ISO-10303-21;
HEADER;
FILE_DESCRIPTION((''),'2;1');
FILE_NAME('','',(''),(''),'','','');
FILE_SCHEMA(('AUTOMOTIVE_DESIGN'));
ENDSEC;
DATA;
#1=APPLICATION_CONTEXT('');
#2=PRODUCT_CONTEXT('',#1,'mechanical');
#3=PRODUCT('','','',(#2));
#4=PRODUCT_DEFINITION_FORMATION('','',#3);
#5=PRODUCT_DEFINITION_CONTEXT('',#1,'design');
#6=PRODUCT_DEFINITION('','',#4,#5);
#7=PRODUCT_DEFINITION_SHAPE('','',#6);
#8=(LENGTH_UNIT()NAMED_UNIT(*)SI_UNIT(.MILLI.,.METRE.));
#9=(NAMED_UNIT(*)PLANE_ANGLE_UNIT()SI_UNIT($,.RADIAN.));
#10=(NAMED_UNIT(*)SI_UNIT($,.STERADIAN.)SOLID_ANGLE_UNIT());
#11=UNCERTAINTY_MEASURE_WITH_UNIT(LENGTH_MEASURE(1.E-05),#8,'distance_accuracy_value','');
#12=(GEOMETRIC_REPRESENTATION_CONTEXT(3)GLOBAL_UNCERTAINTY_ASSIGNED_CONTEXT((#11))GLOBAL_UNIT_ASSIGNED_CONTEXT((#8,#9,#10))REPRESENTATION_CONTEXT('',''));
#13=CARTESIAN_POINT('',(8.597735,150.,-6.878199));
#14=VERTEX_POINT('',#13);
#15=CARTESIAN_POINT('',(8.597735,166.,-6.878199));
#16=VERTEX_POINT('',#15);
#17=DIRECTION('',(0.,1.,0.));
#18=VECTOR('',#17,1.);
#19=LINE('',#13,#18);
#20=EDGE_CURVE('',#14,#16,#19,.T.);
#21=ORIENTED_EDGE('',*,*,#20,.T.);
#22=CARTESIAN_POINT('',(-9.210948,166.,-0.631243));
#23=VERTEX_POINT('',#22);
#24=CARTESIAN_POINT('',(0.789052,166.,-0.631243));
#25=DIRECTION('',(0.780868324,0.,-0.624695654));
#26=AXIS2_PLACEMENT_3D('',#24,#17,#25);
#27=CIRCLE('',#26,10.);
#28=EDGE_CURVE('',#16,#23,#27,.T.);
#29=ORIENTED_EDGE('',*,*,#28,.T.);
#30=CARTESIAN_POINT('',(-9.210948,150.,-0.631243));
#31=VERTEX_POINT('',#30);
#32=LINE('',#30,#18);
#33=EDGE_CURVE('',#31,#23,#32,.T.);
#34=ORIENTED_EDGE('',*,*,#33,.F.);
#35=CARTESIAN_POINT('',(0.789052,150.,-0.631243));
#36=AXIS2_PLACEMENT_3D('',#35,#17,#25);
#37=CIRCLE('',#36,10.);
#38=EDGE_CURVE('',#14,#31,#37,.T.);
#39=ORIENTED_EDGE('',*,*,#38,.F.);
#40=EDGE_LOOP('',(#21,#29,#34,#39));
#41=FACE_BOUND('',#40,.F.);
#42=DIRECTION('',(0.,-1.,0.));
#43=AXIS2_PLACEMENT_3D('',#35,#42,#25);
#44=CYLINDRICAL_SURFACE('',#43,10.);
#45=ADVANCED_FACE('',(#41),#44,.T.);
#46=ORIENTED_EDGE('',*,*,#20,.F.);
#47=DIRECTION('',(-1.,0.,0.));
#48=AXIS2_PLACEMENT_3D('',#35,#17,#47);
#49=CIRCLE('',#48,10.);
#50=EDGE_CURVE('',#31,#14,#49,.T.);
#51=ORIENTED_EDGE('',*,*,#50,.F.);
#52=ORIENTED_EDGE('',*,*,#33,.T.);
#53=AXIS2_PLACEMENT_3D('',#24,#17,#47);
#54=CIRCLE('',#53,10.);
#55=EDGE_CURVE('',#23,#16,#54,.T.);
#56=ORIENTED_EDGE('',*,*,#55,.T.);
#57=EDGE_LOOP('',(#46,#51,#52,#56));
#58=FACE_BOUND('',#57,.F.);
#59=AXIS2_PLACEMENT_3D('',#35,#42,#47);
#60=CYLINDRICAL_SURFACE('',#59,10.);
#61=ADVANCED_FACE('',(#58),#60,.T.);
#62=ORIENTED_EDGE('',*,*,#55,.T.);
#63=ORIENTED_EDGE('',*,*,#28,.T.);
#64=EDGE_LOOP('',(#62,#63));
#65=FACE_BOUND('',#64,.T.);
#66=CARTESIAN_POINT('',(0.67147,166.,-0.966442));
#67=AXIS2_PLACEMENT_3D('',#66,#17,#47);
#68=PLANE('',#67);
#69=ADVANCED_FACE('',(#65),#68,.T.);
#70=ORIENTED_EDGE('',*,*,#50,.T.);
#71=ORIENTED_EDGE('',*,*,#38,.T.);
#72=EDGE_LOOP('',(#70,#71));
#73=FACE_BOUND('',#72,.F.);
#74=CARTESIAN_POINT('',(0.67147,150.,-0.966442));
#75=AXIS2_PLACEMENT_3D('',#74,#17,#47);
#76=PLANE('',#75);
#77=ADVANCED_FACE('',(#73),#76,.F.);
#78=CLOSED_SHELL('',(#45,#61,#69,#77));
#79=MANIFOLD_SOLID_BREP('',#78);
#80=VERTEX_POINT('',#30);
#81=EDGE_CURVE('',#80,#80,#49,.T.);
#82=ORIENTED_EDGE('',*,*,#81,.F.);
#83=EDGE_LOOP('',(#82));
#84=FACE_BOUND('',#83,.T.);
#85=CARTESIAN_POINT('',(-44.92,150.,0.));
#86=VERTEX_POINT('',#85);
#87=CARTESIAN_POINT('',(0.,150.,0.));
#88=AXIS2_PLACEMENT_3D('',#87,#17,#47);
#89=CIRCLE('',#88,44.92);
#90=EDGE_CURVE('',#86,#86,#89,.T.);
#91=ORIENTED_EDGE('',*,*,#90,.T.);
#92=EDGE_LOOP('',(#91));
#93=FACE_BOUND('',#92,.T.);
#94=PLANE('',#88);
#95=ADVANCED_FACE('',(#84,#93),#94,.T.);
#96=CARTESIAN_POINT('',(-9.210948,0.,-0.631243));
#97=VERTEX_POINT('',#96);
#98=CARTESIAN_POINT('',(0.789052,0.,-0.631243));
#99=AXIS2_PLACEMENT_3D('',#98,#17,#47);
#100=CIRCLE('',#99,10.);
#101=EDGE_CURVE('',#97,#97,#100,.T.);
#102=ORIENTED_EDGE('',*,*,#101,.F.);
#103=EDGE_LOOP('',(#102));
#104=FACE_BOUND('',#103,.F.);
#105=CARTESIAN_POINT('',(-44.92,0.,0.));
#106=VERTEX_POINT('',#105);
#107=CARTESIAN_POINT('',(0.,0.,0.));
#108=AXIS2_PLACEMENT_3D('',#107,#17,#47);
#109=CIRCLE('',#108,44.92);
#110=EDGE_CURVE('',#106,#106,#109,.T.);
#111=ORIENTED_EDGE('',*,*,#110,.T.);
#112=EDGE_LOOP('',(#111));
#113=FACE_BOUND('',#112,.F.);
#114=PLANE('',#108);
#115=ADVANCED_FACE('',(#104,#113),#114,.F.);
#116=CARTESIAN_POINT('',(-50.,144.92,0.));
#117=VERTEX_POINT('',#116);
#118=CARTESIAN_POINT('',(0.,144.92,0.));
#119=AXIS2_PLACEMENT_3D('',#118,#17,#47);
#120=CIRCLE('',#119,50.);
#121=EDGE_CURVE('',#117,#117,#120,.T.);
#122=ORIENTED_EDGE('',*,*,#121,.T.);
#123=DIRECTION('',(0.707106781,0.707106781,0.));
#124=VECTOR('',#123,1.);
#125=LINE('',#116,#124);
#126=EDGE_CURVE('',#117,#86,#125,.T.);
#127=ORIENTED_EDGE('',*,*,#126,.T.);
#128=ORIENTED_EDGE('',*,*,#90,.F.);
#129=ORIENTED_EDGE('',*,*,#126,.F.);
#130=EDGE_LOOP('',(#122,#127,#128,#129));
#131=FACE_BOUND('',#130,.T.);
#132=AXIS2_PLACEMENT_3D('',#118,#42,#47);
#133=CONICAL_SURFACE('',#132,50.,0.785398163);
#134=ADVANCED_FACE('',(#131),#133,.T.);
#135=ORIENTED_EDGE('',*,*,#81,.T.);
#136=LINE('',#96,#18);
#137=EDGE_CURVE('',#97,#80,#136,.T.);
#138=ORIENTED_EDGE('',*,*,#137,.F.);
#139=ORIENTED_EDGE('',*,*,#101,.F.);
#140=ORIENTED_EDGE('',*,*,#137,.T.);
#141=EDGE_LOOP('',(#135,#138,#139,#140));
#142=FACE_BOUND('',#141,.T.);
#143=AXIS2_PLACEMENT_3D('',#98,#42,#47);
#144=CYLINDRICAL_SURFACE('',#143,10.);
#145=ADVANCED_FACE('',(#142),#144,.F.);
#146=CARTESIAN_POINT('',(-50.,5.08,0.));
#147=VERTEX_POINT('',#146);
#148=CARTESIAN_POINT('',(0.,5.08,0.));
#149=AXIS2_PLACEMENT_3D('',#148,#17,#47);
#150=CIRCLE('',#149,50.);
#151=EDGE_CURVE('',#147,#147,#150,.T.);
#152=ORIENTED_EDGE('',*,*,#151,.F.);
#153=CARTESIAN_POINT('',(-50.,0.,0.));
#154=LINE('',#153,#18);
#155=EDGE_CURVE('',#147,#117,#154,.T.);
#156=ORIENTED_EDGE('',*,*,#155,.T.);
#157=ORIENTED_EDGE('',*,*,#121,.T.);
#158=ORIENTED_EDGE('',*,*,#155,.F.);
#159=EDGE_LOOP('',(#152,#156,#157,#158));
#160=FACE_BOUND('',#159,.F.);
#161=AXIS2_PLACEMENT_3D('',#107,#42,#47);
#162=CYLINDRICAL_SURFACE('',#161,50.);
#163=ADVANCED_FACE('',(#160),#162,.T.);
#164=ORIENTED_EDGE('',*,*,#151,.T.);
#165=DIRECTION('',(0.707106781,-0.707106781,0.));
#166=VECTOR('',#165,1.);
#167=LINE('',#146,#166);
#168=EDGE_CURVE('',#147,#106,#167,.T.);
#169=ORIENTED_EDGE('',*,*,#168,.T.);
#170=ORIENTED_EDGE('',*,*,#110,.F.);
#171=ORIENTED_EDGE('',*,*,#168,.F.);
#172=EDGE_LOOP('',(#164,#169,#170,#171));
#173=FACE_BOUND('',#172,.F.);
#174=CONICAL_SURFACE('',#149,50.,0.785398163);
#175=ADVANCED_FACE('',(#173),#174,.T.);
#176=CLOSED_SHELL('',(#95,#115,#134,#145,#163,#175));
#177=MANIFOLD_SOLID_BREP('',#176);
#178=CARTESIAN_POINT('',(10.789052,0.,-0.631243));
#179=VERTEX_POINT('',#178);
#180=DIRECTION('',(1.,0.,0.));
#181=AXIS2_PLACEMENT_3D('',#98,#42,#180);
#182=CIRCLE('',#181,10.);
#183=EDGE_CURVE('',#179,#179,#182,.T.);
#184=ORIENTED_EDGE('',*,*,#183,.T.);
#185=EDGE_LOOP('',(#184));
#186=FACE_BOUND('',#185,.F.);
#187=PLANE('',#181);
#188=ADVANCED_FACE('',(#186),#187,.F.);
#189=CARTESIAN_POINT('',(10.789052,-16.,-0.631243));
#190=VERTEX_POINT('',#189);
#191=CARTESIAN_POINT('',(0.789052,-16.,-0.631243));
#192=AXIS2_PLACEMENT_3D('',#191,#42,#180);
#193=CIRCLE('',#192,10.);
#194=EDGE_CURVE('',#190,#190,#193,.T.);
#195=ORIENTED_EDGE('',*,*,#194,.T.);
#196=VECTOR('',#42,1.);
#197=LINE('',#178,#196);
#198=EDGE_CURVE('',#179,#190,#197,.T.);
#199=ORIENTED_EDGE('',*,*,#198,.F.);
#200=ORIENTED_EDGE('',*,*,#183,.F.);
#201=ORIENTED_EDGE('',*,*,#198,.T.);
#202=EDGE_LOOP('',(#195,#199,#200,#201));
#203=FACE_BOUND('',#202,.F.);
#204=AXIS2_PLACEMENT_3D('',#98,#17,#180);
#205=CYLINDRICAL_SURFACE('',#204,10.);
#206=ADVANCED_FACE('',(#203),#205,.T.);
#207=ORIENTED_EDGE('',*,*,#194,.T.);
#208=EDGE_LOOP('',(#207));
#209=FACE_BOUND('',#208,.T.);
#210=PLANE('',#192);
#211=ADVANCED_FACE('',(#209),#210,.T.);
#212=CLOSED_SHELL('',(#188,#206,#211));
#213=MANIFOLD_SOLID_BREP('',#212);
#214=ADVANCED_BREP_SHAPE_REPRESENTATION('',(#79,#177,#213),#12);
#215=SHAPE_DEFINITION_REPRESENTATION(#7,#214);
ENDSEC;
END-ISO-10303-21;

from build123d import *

# Parameters (mm, degrees)
F0_R     = 10
F1_DEPTH = 16
F2_R     = 50
F2_R_2   = 10
F3_DEPTH = 150
F6_DEPTH = 16
F7_SIZE  = 5.08


with BuildPart() as f1:
    # F0 (on Front) → F1 (new body)
    with BuildSketch(Plane.XZ):
        with Locations((0.7890519919, -0.6312426412)):
            Circle(F0_R)
    extrude(amount=F1_DEPTH)


with BuildPart() as f3:
    # F2 (on face) → F3 (new body)
    with BuildSketch(Plane(origin=(0, 0, 0), x_dir=(-1, 0, 0), z_dir=(0, 1, 0))):
        Circle(F2_R)
        with Locations((-0.7890519919, -0.6312426412)):
            Circle(F2_R_2, mode=Mode.SUBTRACT)
    extrude(amount=F3_DEPTH)

    # F7
    f7_edges = [f3.edges().sort_by_distance(p)[0] for p in [
        (50, 150, 0),
        (50, 0, 0),
    ]]
    chamfer(f7_edges, length=F7_SIZE)


with BuildPart() as f6:
    # F5 (on face) → F6 (new body)
    with BuildSketch(Plane(origin=(0, 150, 0), x_dir=(-1, 0, 0), z_dir=(0, 1, 0))):
        with BuildLine():
            ThreePointArc((9.2109480081, -0.6312426412), (-4.099125069, 8.8050392655), (-8.5977352367, -6.8781991788))
            ThreePointArc((-8.5977352367, -6.8781991788), (2.5210210852, -10.067524548), (9.2109480081, -0.6312426412))
        make_face()
    extrude(amount=F6_DEPTH)


solid = Compound([f1.part, f3.part, f6.part])
